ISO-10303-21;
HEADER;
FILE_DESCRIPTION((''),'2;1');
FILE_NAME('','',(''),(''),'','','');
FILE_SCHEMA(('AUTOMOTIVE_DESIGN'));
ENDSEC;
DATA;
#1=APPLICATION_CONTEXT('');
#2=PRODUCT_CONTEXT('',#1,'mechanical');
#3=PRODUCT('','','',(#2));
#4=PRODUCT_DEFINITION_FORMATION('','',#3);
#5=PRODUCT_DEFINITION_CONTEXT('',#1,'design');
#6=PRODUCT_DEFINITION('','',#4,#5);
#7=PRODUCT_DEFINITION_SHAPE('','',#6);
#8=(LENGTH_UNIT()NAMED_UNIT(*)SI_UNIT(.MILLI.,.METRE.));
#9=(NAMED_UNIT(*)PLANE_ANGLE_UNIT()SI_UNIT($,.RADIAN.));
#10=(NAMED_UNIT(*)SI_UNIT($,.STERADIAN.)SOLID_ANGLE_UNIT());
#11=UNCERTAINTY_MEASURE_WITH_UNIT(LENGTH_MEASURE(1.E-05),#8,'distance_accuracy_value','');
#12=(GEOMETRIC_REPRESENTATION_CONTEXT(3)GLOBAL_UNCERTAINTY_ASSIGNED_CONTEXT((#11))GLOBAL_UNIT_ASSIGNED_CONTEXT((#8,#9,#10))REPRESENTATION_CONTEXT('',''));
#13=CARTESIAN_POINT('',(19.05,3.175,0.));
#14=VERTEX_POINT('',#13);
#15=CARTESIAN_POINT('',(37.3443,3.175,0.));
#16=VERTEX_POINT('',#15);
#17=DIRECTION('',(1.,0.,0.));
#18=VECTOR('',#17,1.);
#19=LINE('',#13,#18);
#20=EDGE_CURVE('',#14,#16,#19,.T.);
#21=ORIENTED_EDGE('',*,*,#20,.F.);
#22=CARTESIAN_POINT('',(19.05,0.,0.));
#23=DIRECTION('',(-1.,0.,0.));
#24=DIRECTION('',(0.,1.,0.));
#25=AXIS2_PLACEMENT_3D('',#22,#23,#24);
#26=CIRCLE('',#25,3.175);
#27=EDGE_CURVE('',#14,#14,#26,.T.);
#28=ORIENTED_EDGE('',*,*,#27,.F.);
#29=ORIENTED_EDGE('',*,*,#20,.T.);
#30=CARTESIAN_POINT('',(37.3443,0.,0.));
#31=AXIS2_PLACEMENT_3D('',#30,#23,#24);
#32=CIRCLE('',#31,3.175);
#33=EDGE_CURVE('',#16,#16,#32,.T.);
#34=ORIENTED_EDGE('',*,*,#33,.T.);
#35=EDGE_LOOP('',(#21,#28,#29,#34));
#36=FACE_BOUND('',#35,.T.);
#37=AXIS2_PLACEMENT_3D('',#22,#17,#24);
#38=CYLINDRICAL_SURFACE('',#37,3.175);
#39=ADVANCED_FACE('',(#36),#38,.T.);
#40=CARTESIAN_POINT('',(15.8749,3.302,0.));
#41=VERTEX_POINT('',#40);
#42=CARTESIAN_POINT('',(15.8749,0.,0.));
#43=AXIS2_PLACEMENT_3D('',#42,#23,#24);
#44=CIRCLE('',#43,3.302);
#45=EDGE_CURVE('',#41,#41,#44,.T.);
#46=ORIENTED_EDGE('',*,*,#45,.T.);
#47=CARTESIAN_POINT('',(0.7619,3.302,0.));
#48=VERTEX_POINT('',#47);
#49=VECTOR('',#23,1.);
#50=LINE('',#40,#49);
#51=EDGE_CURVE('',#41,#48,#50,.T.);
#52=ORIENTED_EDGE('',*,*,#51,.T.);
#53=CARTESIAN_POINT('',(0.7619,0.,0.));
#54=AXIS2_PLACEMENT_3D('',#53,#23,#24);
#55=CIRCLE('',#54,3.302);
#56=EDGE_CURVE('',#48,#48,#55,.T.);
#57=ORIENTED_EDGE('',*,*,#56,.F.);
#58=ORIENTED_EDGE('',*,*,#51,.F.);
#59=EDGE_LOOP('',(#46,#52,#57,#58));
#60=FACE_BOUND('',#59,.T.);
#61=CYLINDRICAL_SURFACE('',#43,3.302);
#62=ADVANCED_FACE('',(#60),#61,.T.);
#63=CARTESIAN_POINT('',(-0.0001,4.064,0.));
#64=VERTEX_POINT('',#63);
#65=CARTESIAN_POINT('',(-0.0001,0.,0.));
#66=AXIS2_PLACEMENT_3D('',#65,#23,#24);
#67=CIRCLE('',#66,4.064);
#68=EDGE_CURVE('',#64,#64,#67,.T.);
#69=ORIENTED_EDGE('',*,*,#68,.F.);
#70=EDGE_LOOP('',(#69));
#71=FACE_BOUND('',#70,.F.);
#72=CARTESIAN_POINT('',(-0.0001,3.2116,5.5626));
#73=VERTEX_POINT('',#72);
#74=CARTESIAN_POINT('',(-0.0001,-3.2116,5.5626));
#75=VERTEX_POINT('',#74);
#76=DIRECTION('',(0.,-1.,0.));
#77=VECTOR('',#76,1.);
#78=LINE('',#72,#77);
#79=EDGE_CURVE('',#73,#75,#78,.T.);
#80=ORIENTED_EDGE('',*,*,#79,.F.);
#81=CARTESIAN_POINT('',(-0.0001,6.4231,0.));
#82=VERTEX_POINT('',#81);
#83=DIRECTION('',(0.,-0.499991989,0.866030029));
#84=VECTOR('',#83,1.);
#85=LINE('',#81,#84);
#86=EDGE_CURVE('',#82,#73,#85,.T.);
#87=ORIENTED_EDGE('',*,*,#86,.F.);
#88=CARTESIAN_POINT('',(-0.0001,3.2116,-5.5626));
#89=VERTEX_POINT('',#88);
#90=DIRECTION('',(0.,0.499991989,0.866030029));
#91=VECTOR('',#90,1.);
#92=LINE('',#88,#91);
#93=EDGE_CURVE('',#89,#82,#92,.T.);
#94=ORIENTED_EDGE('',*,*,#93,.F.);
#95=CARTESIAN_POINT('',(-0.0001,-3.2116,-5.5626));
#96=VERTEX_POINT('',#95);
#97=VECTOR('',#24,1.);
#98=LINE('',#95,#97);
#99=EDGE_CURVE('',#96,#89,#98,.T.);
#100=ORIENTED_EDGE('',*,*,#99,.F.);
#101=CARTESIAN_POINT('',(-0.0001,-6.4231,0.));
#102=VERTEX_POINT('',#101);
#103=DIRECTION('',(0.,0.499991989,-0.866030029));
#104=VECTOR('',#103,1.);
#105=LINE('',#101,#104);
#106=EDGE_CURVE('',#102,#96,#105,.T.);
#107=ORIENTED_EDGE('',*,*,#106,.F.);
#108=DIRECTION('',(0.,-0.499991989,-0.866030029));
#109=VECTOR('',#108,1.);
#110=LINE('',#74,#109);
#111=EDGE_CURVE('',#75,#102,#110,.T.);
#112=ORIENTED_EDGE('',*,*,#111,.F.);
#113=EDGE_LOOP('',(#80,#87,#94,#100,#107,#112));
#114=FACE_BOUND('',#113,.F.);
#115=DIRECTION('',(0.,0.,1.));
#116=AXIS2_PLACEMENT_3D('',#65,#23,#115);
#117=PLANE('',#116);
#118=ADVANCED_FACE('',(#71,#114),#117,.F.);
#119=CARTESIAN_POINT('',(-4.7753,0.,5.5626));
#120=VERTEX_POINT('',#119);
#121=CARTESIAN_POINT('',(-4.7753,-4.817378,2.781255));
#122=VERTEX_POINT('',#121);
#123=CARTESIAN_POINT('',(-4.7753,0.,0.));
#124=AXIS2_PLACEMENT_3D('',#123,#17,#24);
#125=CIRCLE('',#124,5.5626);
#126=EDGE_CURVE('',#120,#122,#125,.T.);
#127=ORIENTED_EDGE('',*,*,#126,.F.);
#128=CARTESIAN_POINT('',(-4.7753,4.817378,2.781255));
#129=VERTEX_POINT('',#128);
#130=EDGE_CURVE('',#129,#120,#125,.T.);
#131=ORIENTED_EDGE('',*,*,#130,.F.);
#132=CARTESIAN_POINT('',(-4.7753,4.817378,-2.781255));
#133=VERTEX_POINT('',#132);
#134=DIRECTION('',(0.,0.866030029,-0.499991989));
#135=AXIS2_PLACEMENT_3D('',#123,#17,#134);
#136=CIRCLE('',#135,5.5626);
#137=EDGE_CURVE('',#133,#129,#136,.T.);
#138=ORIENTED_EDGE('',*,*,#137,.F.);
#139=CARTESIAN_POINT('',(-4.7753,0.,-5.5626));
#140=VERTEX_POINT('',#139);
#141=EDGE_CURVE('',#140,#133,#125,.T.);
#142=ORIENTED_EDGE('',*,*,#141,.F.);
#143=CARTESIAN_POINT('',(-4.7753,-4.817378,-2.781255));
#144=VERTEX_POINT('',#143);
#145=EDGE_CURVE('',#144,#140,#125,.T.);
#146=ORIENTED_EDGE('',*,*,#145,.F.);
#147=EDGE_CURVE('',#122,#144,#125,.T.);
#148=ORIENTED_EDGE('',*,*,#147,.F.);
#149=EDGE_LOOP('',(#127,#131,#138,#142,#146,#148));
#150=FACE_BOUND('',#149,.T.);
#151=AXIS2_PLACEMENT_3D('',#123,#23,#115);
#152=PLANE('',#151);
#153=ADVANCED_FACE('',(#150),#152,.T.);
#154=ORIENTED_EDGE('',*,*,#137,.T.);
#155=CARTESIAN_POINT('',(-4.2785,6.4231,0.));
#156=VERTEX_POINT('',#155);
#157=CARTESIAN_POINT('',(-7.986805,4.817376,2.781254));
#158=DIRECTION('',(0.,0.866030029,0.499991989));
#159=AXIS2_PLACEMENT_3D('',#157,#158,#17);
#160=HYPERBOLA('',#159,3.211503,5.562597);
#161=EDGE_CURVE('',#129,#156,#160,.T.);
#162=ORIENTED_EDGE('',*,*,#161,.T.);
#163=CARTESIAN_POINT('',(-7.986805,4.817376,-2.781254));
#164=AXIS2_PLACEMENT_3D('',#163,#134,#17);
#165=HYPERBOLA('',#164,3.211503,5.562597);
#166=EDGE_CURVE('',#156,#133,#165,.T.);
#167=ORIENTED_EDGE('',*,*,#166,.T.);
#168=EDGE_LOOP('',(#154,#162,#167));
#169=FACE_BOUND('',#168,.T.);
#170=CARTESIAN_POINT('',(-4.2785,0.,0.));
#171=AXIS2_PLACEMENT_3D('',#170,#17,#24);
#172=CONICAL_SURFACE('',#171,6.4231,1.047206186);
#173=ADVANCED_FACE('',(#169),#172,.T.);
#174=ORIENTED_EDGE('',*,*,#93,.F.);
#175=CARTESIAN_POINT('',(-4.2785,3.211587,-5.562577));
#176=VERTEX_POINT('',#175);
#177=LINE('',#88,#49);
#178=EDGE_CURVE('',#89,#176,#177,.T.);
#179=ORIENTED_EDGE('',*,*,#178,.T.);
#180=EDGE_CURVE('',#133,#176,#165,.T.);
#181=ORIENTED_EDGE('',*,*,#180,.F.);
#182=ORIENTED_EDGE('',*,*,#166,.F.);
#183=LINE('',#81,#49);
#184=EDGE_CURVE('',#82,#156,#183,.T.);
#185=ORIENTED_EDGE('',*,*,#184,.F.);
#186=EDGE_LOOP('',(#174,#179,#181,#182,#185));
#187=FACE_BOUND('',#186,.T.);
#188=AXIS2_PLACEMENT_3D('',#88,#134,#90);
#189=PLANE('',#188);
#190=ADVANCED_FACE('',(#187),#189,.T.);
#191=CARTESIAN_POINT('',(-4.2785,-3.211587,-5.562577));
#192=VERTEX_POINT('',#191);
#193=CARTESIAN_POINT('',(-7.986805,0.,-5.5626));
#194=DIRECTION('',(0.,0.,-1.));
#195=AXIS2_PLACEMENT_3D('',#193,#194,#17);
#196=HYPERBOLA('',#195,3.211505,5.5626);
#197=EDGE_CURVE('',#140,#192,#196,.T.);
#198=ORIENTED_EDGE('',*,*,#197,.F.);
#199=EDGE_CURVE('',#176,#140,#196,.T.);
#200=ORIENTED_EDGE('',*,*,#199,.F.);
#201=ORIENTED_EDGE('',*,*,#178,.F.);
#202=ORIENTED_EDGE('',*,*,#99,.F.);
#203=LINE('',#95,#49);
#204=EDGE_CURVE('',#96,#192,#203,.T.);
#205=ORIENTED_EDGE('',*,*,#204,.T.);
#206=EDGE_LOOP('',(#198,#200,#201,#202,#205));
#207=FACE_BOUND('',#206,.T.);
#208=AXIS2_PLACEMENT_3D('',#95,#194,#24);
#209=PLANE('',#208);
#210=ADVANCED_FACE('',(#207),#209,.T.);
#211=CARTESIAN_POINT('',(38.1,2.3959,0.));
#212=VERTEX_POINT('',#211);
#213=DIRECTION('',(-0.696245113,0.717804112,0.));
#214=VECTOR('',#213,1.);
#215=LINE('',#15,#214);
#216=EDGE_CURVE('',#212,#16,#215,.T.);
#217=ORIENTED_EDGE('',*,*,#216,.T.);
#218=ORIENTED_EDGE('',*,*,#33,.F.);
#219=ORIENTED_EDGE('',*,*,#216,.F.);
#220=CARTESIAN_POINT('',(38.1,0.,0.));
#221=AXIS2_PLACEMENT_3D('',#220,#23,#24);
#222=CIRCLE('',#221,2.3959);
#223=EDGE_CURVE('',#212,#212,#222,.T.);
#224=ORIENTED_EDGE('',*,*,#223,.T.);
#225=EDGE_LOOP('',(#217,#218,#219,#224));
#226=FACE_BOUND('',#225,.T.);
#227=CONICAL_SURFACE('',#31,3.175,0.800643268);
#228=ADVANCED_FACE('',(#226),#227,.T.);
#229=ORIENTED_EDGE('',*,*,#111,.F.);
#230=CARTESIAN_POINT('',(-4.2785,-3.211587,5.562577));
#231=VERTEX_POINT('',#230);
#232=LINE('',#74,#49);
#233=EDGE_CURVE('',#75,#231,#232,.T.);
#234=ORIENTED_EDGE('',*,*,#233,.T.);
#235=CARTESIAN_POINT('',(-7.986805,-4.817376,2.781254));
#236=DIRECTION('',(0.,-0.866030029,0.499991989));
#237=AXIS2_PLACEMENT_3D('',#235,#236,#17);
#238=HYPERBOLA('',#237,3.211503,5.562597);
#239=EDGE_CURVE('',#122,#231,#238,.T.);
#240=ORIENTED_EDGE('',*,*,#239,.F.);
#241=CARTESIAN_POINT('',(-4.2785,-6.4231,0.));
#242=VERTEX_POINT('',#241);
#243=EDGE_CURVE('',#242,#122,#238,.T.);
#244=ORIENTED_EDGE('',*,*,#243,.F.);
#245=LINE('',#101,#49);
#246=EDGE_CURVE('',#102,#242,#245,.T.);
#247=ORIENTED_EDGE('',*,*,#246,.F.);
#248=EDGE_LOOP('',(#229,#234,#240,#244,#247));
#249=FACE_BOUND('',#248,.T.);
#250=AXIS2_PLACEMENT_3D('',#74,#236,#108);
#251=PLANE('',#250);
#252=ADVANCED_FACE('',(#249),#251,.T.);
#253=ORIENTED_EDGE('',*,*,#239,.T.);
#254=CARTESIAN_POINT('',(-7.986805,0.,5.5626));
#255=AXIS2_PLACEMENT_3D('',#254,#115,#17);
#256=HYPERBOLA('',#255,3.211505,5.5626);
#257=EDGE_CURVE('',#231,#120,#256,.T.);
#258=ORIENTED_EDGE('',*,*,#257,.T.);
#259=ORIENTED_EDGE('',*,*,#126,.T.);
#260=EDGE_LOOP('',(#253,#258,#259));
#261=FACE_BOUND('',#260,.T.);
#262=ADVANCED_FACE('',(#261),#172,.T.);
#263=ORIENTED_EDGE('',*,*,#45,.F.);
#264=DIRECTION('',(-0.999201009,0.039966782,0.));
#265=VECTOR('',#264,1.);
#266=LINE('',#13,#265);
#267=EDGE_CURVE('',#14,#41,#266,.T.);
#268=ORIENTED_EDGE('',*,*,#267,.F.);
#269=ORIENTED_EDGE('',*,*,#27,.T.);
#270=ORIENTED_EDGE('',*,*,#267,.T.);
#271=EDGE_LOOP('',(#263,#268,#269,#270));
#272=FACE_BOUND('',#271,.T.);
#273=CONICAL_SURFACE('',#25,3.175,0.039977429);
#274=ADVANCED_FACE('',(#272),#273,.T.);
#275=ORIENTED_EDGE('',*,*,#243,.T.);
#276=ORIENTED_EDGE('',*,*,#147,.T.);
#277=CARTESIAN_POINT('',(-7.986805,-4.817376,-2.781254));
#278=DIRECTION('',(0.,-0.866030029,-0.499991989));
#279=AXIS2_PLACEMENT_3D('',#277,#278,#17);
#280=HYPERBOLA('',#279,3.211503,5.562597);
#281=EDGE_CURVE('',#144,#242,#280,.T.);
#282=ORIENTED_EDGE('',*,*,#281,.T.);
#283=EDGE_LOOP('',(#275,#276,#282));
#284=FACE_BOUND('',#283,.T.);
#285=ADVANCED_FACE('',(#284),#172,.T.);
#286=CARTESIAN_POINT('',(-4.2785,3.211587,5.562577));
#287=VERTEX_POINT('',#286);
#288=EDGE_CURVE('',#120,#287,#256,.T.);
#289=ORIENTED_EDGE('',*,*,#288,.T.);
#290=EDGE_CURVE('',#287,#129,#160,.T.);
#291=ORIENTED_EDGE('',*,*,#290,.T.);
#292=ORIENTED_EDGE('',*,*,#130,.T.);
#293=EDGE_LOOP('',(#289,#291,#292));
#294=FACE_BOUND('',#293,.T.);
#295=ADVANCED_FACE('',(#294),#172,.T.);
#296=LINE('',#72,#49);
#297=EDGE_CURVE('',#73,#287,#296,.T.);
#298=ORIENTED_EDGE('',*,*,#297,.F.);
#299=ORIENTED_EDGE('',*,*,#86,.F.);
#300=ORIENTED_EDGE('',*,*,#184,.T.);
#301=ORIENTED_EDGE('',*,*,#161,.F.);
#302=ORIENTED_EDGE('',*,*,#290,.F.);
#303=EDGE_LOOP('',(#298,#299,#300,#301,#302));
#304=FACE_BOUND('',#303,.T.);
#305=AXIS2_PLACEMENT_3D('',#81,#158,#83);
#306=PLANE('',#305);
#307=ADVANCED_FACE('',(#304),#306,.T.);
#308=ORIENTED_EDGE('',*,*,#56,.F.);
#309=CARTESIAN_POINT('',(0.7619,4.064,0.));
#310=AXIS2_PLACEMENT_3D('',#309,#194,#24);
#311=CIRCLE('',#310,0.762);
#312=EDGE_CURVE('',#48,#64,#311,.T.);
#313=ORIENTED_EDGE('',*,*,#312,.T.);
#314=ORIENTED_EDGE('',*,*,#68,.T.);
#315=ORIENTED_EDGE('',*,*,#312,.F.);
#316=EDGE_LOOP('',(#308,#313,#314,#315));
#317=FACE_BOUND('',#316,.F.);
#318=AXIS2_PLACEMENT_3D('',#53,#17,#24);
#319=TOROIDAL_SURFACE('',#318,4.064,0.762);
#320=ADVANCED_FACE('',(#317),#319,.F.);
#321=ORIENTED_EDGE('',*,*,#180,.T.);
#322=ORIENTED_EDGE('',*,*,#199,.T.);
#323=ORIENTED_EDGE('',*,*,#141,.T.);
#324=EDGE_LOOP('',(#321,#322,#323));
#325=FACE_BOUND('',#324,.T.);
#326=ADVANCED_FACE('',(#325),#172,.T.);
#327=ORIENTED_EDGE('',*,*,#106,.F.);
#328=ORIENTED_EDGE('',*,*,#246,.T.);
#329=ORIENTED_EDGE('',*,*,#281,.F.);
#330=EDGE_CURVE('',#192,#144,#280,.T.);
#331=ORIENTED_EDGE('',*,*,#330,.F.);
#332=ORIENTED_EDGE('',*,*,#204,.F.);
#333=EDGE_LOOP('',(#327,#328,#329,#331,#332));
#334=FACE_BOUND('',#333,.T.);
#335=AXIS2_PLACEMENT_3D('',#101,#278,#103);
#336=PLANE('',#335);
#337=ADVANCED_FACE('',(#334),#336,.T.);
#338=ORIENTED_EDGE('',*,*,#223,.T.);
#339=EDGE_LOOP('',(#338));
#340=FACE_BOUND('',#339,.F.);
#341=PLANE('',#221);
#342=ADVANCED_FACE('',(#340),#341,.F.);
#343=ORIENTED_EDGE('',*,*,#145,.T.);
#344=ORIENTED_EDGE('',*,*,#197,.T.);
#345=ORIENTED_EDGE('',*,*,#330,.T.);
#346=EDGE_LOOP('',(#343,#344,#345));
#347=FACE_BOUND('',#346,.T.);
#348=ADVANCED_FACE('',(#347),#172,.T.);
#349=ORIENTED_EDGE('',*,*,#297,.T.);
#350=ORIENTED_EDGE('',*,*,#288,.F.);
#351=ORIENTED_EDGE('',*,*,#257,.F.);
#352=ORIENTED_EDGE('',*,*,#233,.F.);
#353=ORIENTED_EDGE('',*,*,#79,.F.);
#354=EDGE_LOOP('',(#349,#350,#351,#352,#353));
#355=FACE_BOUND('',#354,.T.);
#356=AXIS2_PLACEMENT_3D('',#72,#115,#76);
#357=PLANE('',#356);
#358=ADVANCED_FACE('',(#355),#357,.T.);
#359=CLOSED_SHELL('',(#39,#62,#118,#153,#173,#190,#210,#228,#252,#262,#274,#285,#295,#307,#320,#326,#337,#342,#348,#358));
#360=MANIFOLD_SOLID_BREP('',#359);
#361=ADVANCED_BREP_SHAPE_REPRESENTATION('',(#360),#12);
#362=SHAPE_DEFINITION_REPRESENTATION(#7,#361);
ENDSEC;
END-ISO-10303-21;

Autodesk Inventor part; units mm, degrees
ref_plane "YZ Plane" through (0, 0, 0) normal (1, 0, 0) x (0, 1, 0)
ref_plane "XZ Plane" through (0, 0, 0) normal (0, 1, 0) x (-1, 0, 0)
sketch "Sketch1" plane through (0, 0, 0) normal (0, 0, 1) x (1, 0, 0)
  line L0 (0, 5.5626) -> (0, 3.302)
  line L1 (19.05, 3.175) -> (38.1, 3.175)
  line L2 (38.1, 3.175) -> (38.1, 0)
  line L3 (38.1, 0) -> (-0.0001, 0)
  line L4 (-7.6201, 0) -> (45.72, 0) projected
  line L5 (-0.0001, 0) -> (-0.0001, 5.5626)
  line L6 (-0.0001, 5.5626) -> (0, 5.5626)
  line L7 (19.05, 3.175) -> (15.8749, 3.302)
  line L8 (15.8749, 3.302) -> (0, 3.302)
  line L9 (0, -1.1125) -> (0, 6.6751) projected
  dimension "d0" = 38.1
  dimension "d1" = 19.05
  dimension "d2" = 6.35
  dimension "d9" = 0.0001
  dimension "d10" = 11.1252
  dimension "d13" = 3.1751
  dimension "d14" = 6.604
revolve "Body" add sketch "Sketch1" angle 360 about axis through (38.1, 0, 0) along (-1, 0, 0)
sketch "Sketch2" plane through (-0.0001, 0, 0) normal (-1, 0, 0) x (0, 0, 1)
  line L0 (0, 6.4231) -> (5.5626, 3.2116)
  line L1 (5.5626, 3.2116) -> (5.5626, -3.2116)
  line L2 (5.5626, -3.2116) -> (0, -6.4231)
  line L3 (0, -6.4231) -> (-5.5626, -3.2116)
  line L4 (-5.5626, -3.2116) -> (-5.5626, 3.2116)
  line L5 (-5.5626, 3.2116) -> (0, 6.4231)
  point P0 (0, 0)
  point P1 (0, 0)
  dimension "d11" = 11.1252
extrude "Head" add sketch "Sketch2" along normal blind 4.7752
sketch "Sketch4" plane through (0, 0, 0) normal (0, 0, 1) x (1, 0, 0)
  line L0 (-4.7753, 5.5626) -> (-4.7753, 6.4231)
  line L1 (-4.7753, 6.4231) -> (-4.2785, 6.4231)
  line L2 (-4.2785, 6.4231) -> (-4.7753, 5.5626)
  line L3 (-5.7303, 0) -> (0.9549, 0) projected
  line L4 (-0.0001, 6.4231) -> (-4.7753, 6.4231) projected
  line L5 (-4.7753, 3.2116) -> (-4.7753, 6.4231) projected
  dimension "d5" = 30
  dimension "d19" = 11.1252
revolve "Chamfer1" cut sketch "Sketch4" angle 360 about axis through (-10, 0, 0) along (1, 0, 0)
thread "Thread" size "1/4-20 UNC" class "2A" standard "ANSI Unified Screw Threads" length 19.05
chamfer "Chamfer2" distance 0.7791 distance2 0.7557 1 edges at (38.1, -3.175, 0) measured on face at (38.1, -0.8017, 1.6073)
ref_plane "Work Plane1" through (1.525, 0, 0) normal (0, 0, 1) x (1, 0, 0)
fillet "Fillet2" radius 0.762 1 edges at (0, -3.302, 0)
equation "\"d0\" = NLG"
equation "\"d1\" = GEL"
equation "\"d2\" = GD"
equation "\"d10\" = SD2"
equation "\"d14\" = BDM"
equation "\"d11\" = SW"
equation "\"d3\" = KOH - SD"
equation "\"d5\" = ANG1"
equation "\"d19\" = SW0"
equation "\"d63\" = R"
equation "\"d15\" = GEL"
equation "\"d6\" = -0.5 * SPD + 0.5 * GD"
equation "\"NLG\" = 38.1"
equation "\"GD\" = NND"
equation "\"BDM\" = 6.604"
equation "\"KOH\" = 4.7752"
equation "\"GEL\" = 19.05"
equation "\"SW\" = 11.1252"
equation "\"SW0\" = SW"
equation "\"SPD\" = GD1"
equation "\"SD2\" = SW"
equation "\"SD\" = 0"
equation "\"ANG1\" = 30deg"
equation "\"GAL\" = 3.175"
equation "\"GUL\" = 0.238 * GAL"
equation "\"R\" = 0.762"
equation "\"d62\" = -NLG - SD + GUL"
equation "\"GD1\" = 4.79184"
equation "\"THREADDIA\" = 6.35"
equation "\"TOA\" = 30deg"
equation "\"NND\" = 6.35"
equation "\"E0\" = 1.155 * SW"
properties part number "ANSI/ASME B18.2.1 - 1/4-20 UNC - 1.5" material "Steel, Mild"
